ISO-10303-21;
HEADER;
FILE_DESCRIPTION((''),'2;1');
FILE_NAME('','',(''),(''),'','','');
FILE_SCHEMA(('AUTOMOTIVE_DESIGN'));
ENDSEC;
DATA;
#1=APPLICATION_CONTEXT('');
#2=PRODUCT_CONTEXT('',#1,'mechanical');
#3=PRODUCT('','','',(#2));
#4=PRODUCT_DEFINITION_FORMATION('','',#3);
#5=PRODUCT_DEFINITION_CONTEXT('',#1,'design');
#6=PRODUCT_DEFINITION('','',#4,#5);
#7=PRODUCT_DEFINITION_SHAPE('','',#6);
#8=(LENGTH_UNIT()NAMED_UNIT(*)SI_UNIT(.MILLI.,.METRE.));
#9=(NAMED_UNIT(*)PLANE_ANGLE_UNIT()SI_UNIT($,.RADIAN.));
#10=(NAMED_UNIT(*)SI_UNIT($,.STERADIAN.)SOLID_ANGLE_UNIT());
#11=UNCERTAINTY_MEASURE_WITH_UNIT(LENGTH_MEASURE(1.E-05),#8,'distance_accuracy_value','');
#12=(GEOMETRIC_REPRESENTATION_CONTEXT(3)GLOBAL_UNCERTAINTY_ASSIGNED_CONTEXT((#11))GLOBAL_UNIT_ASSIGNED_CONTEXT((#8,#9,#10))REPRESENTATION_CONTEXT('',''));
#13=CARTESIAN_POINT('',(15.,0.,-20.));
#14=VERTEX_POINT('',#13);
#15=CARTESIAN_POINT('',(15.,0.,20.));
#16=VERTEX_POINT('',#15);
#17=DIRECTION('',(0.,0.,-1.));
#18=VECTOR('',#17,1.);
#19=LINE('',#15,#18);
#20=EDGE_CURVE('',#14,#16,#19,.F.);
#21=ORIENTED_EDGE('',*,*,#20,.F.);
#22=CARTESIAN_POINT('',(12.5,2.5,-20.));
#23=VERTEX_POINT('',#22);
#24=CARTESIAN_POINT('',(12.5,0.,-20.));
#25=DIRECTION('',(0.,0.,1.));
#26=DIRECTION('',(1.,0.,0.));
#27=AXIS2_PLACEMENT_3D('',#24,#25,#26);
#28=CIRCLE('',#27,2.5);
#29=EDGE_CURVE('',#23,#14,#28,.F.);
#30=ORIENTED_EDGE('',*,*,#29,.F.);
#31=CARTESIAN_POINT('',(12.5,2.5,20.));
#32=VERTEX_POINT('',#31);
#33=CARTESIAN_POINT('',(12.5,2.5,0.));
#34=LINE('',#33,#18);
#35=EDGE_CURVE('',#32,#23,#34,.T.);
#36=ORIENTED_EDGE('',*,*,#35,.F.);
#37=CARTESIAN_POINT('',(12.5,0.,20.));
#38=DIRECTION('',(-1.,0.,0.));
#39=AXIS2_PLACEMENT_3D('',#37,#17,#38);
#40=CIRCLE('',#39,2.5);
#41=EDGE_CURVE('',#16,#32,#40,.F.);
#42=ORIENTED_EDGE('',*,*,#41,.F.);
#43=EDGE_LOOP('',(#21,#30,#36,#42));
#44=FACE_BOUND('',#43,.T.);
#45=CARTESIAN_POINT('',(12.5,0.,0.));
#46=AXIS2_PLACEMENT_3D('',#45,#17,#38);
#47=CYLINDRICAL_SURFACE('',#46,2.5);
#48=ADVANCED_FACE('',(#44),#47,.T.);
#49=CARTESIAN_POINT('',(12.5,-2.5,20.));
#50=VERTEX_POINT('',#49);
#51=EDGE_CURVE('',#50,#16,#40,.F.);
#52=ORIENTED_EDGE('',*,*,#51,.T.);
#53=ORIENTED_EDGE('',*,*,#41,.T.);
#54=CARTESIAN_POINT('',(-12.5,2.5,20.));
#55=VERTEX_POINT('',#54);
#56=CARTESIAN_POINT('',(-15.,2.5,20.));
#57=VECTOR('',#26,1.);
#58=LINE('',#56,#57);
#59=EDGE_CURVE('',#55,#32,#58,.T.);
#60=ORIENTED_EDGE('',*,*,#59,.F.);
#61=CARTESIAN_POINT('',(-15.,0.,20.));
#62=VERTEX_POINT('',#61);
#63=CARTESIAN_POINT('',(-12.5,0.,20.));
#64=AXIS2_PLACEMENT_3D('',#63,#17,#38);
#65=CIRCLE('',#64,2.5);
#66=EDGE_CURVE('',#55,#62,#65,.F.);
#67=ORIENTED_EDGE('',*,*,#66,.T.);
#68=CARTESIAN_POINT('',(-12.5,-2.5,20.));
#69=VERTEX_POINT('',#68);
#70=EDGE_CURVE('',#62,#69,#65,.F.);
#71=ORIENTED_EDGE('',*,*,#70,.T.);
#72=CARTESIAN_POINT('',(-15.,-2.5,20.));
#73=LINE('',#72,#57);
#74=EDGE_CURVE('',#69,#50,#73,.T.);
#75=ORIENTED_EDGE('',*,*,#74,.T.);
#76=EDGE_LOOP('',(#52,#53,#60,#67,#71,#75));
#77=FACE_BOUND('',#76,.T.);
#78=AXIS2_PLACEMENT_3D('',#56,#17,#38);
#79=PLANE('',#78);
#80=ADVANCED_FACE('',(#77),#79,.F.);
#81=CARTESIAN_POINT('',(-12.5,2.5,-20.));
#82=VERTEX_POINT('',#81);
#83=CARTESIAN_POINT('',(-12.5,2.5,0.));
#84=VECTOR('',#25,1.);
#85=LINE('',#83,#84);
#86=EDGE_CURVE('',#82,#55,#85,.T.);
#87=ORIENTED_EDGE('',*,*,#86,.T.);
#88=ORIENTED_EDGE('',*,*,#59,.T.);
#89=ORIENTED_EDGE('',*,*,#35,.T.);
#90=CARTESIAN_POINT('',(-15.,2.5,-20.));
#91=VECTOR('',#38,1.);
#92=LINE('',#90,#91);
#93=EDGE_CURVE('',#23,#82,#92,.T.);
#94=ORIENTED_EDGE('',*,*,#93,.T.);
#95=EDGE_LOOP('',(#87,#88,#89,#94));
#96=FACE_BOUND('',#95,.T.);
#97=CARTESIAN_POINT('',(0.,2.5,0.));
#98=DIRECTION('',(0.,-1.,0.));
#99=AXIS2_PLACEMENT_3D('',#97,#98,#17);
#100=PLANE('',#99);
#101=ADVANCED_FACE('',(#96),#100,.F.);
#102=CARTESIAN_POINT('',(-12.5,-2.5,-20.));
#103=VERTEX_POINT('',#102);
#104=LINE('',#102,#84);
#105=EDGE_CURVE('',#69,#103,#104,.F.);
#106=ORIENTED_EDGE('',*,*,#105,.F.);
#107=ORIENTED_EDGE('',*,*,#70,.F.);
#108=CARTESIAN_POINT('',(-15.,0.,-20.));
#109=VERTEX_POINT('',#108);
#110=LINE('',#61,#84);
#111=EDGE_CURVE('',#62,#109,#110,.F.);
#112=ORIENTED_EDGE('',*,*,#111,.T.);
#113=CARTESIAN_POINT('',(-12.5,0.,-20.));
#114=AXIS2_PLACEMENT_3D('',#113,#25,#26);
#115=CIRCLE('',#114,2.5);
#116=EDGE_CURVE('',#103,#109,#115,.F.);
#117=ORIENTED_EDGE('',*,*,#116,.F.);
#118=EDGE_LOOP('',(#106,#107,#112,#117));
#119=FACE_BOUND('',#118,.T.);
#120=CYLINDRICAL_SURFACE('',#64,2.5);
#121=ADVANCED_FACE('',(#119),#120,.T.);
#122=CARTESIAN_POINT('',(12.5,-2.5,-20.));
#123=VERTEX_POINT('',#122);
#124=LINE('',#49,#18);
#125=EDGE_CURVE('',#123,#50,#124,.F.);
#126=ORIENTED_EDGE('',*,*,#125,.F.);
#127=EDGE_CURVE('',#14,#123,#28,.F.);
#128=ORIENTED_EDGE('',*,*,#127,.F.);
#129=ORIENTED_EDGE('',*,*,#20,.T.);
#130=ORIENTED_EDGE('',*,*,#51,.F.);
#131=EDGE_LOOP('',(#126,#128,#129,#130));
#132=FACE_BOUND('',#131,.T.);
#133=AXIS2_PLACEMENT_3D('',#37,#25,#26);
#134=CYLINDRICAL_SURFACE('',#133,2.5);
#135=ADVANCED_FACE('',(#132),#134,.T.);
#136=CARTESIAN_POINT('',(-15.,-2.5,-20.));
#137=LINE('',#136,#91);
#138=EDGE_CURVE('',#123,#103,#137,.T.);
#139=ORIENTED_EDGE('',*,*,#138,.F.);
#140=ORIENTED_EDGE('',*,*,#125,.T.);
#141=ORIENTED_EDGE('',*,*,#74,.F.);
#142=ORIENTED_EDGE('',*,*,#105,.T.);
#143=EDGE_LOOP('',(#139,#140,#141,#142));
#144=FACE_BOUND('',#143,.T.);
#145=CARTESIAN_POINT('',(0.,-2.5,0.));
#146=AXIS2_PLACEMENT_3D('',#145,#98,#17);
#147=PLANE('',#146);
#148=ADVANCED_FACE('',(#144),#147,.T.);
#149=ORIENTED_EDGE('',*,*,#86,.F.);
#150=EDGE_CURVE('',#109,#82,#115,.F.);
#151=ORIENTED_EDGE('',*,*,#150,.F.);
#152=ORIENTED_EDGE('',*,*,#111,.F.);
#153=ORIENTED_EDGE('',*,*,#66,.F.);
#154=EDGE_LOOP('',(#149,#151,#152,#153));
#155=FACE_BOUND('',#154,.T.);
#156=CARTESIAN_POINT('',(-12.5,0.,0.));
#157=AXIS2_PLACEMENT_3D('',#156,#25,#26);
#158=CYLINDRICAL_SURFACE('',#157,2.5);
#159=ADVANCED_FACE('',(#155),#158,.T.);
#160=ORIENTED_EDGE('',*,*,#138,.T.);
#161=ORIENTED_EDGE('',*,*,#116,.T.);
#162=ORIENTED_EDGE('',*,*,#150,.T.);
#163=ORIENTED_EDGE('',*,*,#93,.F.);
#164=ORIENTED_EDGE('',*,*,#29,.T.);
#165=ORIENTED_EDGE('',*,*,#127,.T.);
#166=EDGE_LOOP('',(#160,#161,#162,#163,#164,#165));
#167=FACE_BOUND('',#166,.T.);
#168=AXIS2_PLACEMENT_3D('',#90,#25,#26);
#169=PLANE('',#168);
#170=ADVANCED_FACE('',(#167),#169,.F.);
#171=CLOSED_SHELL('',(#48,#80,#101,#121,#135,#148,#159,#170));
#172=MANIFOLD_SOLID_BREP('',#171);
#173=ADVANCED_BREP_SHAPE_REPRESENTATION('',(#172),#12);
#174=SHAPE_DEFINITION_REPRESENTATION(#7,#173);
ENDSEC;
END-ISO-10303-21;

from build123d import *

# Parameters (mm, degrees)
SKETCH1_W      = 30
SKETCH1_H      = 40
EXTRUDE1_DEPTH = 2.5
FILLET1_R      = 2.5


with BuildPart() as part:
    # Sketch1 → Extrude1 (new, symmetric)
    with BuildSketch(Plane(origin=(0, 0, 0), x_dir=(1, 0, 0), z_dir=(0, 1, 0))):
        Rectangle(SKETCH1_W, SKETCH1_H)
    extrude(amount=EXTRUDE1_DEPTH, both=True)

    # Fillet1
    fillet1_edges = [part.edges().sort_by_distance(p)[0] for p in [
        (15, -2.5, 0),
        (15, 2.5, 0),
        (-15, -2.5, 0),
        (-15, 2.5, 0),
    ]]
    fillet(fillet1_edges, radius=FILLET1_R - 0.0001)  # a hair under: the kernel refuses the full size


solid = part.part
